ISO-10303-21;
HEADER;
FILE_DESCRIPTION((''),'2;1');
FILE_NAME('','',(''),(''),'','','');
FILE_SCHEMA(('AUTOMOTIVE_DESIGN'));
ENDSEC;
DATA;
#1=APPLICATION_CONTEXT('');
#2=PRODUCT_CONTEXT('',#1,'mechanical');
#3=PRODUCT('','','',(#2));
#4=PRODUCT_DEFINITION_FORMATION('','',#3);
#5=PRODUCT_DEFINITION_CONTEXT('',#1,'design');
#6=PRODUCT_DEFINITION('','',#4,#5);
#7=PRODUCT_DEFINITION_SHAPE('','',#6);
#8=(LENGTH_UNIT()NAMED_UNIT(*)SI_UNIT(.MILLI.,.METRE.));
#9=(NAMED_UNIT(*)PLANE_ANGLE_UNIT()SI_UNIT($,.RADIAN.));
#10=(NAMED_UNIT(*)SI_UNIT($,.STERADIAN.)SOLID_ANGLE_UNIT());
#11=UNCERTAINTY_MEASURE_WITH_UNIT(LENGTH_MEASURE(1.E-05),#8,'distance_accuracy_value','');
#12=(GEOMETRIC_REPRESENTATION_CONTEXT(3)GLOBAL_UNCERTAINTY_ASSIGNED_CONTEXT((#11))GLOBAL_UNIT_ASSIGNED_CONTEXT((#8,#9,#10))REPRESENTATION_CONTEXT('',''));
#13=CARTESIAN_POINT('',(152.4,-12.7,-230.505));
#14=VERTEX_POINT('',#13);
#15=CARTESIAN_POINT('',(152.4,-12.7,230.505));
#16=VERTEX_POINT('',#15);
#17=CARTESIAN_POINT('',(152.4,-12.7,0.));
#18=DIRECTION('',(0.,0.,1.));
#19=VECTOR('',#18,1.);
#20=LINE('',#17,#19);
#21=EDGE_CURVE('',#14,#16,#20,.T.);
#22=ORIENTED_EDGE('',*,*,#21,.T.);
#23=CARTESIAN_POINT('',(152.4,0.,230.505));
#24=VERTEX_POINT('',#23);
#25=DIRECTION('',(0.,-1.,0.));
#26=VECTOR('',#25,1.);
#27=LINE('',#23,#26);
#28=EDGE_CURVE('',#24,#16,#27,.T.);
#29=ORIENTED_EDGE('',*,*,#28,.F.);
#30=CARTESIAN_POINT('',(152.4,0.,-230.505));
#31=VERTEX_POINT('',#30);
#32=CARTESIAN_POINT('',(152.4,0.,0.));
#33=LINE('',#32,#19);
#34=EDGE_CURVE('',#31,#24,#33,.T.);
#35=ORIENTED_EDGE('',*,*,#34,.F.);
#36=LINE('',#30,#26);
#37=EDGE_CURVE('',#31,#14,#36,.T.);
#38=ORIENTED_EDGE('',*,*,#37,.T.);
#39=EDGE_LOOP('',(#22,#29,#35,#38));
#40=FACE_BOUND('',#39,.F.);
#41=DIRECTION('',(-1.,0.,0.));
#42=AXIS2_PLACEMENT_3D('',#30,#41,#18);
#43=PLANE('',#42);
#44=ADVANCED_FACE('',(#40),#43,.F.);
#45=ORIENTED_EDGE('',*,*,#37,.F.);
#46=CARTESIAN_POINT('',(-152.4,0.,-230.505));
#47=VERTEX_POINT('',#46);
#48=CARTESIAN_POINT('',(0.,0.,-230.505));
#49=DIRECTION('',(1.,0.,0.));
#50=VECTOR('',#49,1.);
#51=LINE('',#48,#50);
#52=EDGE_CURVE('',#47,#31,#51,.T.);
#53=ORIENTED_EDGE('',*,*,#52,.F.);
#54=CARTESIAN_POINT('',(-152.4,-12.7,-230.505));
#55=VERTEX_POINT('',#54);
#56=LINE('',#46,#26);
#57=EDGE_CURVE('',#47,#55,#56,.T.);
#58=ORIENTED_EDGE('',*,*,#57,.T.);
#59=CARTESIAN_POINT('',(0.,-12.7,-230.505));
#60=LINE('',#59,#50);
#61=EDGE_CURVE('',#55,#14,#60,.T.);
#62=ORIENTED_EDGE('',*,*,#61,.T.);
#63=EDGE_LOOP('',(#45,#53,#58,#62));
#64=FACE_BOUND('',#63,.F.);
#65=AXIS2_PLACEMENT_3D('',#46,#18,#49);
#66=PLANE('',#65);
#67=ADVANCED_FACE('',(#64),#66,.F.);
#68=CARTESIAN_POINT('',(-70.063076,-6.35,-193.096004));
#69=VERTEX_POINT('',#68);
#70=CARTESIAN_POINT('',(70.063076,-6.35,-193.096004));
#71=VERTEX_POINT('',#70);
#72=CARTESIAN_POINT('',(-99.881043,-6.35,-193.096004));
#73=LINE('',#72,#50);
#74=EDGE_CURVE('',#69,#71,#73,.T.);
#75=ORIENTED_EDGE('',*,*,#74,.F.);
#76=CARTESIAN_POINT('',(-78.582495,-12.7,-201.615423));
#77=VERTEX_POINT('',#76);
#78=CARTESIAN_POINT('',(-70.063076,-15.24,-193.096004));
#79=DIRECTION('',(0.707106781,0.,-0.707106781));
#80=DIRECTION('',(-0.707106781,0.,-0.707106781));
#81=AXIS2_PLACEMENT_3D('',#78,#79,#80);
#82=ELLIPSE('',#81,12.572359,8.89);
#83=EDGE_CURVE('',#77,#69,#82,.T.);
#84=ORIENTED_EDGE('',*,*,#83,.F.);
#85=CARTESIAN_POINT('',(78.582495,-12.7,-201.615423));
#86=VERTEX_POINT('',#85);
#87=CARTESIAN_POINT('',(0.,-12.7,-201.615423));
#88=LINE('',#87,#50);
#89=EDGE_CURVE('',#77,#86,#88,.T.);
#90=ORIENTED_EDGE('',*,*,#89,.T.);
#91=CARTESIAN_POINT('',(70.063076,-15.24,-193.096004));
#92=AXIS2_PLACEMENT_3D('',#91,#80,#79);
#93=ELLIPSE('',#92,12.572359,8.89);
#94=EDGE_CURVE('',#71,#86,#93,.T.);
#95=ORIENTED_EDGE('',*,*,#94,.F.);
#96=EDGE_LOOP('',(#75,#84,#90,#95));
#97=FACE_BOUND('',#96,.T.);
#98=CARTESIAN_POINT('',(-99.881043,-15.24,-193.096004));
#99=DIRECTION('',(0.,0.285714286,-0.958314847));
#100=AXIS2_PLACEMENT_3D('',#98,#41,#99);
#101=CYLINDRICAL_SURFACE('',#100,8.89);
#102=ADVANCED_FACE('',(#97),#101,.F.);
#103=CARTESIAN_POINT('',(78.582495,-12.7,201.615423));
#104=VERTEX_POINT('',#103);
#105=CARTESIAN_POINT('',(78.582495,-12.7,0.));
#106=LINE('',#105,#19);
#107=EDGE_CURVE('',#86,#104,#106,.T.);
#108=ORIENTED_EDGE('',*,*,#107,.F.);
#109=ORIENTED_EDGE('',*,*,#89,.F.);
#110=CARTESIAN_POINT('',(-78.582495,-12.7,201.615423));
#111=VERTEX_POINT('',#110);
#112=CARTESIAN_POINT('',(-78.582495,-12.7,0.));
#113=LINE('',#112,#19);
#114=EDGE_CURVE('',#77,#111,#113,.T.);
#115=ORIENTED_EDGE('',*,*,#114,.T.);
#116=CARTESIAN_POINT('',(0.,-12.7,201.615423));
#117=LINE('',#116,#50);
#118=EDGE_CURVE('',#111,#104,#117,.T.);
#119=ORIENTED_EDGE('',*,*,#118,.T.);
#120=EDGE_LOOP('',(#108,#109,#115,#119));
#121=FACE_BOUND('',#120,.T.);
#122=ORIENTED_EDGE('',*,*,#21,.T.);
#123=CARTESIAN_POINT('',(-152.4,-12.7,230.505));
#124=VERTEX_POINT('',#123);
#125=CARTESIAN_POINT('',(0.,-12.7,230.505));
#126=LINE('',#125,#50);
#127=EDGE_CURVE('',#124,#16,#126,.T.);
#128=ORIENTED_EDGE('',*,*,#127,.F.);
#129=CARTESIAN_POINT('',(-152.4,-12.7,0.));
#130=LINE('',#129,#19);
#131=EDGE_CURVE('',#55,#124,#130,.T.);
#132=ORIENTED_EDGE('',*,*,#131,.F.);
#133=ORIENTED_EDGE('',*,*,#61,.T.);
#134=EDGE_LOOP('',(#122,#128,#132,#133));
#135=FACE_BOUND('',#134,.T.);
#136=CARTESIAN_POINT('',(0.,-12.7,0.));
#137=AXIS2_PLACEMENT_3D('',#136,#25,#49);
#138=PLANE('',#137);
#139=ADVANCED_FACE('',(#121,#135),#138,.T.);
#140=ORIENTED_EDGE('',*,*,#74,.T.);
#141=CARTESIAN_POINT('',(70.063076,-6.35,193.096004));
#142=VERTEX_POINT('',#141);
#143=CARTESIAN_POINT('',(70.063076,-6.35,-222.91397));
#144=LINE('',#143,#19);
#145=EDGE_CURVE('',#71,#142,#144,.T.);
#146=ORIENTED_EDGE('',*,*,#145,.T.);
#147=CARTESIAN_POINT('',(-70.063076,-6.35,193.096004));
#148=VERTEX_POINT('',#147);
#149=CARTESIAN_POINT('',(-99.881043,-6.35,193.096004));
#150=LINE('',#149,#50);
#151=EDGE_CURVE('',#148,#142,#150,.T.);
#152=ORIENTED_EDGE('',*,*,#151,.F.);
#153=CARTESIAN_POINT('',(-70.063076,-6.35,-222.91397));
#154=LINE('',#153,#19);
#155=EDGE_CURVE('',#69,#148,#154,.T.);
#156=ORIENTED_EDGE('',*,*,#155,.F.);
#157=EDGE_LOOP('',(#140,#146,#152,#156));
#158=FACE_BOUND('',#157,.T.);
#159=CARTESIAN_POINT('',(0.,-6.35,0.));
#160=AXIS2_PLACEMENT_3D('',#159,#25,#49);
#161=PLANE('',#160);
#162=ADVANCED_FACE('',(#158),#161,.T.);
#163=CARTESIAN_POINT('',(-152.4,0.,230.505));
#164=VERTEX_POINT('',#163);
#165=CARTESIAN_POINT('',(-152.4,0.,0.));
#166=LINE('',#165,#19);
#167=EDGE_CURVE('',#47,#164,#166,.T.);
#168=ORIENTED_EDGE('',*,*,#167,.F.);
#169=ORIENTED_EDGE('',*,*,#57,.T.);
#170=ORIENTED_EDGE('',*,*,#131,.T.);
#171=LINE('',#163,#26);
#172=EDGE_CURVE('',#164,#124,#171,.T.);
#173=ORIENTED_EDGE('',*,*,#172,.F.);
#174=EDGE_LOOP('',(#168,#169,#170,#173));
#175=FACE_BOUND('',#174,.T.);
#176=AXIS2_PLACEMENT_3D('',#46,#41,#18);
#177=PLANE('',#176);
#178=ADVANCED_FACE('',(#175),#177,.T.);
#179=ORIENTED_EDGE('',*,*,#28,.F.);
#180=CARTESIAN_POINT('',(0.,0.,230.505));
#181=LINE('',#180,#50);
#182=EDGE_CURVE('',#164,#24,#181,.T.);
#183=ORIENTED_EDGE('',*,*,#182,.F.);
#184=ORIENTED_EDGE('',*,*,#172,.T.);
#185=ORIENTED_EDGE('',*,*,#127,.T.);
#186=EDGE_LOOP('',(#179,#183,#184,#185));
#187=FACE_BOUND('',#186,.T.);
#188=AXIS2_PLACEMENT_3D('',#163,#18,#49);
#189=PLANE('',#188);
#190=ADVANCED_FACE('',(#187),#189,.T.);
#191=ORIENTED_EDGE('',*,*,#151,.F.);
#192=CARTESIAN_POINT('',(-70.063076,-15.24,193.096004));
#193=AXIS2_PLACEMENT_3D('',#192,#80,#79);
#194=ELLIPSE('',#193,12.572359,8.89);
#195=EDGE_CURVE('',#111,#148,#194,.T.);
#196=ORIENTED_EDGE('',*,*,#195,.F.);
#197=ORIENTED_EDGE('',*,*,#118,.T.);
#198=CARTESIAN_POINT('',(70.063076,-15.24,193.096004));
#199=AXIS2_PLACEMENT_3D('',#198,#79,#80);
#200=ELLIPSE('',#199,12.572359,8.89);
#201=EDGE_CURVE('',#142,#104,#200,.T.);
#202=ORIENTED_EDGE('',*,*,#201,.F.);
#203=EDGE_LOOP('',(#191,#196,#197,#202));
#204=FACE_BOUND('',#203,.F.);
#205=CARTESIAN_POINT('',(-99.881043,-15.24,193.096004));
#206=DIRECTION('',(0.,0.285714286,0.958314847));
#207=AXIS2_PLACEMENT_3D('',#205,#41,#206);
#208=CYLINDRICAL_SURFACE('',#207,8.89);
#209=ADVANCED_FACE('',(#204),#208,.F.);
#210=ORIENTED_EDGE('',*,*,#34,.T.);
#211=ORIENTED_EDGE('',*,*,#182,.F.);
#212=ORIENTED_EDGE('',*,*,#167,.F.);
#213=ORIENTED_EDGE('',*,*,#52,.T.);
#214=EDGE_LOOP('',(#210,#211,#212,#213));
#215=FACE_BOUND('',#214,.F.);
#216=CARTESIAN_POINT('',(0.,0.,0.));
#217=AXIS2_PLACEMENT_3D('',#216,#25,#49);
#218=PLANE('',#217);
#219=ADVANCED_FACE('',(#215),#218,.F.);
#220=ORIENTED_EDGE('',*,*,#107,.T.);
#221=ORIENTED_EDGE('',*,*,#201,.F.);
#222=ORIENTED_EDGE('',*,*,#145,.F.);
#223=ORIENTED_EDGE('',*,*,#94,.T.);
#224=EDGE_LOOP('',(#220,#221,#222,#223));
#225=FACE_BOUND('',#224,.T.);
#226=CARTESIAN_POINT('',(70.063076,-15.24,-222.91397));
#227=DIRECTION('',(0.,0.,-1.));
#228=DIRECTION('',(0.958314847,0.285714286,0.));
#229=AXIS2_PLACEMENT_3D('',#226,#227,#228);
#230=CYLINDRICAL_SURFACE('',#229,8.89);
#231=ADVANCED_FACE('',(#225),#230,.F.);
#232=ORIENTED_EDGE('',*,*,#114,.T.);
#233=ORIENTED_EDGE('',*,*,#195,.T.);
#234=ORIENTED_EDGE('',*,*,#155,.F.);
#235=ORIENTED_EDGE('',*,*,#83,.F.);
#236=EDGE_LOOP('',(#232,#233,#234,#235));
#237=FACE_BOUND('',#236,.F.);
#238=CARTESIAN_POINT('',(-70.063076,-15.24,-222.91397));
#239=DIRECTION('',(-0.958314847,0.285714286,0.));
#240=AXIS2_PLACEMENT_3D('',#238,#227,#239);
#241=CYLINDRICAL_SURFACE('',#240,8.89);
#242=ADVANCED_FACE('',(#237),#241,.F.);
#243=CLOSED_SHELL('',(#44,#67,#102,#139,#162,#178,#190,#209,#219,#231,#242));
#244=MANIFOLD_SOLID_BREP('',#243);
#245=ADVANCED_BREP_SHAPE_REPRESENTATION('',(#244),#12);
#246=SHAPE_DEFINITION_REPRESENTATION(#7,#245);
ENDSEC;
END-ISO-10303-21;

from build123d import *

# Parameters (mm, degrees)
F0_W        = 304.8
F0_H        = 461.01
F1_DEPTH    = 12.7
F2_W        = 157.1649909019
F2_H        = 403.2308459282
F3_DEPTH    = 6.35
F4_T1_DEPTH = 445.8279408996
F4_T3_DEPTH = 199.7620858733


# Not quite as in the source:
# - a fillet or chamfer that OpenCascade refuses, or shapes differently, is made with other operations: its cross-section is extruded or revolved along the edge and cut away or added


with BuildPart() as f1:
    # F0 (on Front) → F1 (new body)
    with BuildSketch(Plane.XZ):
        Rectangle(F0_W, F0_H)
    extrude(amount=F1_DEPTH)

    # F2 (on face) → F3 (cut)
    with BuildSketch(Plane.XZ.offset(12.7)):
        Rectangle(F2_W, F2_H)
    extrude(amount=-F3_DEPTH, mode=Mode.SUBTRACT)

    # F4: fillet of radius 8.89 on 4 edges, made by hand

    # F4_s2 → F4_t1 (join)
    with BuildSketch(Plane.XY.offset(-222.9139704498)):
        with BuildLine():
            ThreePointArc((78.582495451, -12.7), (75.3758676252, -8.1121426782), (70.0630764567, -6.35))
            Line((70.0630764567, -6.35), (78.582495451, -6.35))
            Line((78.582495451, -6.35), (78.582495451, -12.7))
        make_face()
        with BuildLine():
            ThreePointArc((-78.582495451, -12.7), (-75.3758676252, -8.1121426782), (-70.0630764567, -6.35))
            Line((-70.0630764567, -6.35), (-78.582495451, -6.35))
            Line((-78.582495451, -6.35), (-78.582495451, -12.7))
        make_face()
    extrude(amount=F4_T1_DEPTH)

    # F4_s4 → F4_t3 (join)
    with BuildSketch(Plane.YZ.offset(-99.8810429367)):
        with BuildLine():
            ThreePointArc((-12.7, 201.6154229641), (-8.1121426782, 198.4087951383), (-6.35, 193.0960039698))
            Line((-6.35, 193.0960039698), (-6.35, 201.6154229641))
            Line((-6.35, 201.6154229641), (-12.7, 201.6154229641))
        make_face()
        with BuildLine():
            ThreePointArc((-12.7, -201.6154229641), (-8.1121426782, -198.4087951383), (-6.35, -193.0960039698))
            Line((-6.35, -193.0960039698), (-6.35, -201.6154229641))
            Line((-6.35, -201.6154229641), (-12.7, -201.6154229641))
        make_face()
    extrude(amount=F4_T3_DEPTH)


solid = f1.part
